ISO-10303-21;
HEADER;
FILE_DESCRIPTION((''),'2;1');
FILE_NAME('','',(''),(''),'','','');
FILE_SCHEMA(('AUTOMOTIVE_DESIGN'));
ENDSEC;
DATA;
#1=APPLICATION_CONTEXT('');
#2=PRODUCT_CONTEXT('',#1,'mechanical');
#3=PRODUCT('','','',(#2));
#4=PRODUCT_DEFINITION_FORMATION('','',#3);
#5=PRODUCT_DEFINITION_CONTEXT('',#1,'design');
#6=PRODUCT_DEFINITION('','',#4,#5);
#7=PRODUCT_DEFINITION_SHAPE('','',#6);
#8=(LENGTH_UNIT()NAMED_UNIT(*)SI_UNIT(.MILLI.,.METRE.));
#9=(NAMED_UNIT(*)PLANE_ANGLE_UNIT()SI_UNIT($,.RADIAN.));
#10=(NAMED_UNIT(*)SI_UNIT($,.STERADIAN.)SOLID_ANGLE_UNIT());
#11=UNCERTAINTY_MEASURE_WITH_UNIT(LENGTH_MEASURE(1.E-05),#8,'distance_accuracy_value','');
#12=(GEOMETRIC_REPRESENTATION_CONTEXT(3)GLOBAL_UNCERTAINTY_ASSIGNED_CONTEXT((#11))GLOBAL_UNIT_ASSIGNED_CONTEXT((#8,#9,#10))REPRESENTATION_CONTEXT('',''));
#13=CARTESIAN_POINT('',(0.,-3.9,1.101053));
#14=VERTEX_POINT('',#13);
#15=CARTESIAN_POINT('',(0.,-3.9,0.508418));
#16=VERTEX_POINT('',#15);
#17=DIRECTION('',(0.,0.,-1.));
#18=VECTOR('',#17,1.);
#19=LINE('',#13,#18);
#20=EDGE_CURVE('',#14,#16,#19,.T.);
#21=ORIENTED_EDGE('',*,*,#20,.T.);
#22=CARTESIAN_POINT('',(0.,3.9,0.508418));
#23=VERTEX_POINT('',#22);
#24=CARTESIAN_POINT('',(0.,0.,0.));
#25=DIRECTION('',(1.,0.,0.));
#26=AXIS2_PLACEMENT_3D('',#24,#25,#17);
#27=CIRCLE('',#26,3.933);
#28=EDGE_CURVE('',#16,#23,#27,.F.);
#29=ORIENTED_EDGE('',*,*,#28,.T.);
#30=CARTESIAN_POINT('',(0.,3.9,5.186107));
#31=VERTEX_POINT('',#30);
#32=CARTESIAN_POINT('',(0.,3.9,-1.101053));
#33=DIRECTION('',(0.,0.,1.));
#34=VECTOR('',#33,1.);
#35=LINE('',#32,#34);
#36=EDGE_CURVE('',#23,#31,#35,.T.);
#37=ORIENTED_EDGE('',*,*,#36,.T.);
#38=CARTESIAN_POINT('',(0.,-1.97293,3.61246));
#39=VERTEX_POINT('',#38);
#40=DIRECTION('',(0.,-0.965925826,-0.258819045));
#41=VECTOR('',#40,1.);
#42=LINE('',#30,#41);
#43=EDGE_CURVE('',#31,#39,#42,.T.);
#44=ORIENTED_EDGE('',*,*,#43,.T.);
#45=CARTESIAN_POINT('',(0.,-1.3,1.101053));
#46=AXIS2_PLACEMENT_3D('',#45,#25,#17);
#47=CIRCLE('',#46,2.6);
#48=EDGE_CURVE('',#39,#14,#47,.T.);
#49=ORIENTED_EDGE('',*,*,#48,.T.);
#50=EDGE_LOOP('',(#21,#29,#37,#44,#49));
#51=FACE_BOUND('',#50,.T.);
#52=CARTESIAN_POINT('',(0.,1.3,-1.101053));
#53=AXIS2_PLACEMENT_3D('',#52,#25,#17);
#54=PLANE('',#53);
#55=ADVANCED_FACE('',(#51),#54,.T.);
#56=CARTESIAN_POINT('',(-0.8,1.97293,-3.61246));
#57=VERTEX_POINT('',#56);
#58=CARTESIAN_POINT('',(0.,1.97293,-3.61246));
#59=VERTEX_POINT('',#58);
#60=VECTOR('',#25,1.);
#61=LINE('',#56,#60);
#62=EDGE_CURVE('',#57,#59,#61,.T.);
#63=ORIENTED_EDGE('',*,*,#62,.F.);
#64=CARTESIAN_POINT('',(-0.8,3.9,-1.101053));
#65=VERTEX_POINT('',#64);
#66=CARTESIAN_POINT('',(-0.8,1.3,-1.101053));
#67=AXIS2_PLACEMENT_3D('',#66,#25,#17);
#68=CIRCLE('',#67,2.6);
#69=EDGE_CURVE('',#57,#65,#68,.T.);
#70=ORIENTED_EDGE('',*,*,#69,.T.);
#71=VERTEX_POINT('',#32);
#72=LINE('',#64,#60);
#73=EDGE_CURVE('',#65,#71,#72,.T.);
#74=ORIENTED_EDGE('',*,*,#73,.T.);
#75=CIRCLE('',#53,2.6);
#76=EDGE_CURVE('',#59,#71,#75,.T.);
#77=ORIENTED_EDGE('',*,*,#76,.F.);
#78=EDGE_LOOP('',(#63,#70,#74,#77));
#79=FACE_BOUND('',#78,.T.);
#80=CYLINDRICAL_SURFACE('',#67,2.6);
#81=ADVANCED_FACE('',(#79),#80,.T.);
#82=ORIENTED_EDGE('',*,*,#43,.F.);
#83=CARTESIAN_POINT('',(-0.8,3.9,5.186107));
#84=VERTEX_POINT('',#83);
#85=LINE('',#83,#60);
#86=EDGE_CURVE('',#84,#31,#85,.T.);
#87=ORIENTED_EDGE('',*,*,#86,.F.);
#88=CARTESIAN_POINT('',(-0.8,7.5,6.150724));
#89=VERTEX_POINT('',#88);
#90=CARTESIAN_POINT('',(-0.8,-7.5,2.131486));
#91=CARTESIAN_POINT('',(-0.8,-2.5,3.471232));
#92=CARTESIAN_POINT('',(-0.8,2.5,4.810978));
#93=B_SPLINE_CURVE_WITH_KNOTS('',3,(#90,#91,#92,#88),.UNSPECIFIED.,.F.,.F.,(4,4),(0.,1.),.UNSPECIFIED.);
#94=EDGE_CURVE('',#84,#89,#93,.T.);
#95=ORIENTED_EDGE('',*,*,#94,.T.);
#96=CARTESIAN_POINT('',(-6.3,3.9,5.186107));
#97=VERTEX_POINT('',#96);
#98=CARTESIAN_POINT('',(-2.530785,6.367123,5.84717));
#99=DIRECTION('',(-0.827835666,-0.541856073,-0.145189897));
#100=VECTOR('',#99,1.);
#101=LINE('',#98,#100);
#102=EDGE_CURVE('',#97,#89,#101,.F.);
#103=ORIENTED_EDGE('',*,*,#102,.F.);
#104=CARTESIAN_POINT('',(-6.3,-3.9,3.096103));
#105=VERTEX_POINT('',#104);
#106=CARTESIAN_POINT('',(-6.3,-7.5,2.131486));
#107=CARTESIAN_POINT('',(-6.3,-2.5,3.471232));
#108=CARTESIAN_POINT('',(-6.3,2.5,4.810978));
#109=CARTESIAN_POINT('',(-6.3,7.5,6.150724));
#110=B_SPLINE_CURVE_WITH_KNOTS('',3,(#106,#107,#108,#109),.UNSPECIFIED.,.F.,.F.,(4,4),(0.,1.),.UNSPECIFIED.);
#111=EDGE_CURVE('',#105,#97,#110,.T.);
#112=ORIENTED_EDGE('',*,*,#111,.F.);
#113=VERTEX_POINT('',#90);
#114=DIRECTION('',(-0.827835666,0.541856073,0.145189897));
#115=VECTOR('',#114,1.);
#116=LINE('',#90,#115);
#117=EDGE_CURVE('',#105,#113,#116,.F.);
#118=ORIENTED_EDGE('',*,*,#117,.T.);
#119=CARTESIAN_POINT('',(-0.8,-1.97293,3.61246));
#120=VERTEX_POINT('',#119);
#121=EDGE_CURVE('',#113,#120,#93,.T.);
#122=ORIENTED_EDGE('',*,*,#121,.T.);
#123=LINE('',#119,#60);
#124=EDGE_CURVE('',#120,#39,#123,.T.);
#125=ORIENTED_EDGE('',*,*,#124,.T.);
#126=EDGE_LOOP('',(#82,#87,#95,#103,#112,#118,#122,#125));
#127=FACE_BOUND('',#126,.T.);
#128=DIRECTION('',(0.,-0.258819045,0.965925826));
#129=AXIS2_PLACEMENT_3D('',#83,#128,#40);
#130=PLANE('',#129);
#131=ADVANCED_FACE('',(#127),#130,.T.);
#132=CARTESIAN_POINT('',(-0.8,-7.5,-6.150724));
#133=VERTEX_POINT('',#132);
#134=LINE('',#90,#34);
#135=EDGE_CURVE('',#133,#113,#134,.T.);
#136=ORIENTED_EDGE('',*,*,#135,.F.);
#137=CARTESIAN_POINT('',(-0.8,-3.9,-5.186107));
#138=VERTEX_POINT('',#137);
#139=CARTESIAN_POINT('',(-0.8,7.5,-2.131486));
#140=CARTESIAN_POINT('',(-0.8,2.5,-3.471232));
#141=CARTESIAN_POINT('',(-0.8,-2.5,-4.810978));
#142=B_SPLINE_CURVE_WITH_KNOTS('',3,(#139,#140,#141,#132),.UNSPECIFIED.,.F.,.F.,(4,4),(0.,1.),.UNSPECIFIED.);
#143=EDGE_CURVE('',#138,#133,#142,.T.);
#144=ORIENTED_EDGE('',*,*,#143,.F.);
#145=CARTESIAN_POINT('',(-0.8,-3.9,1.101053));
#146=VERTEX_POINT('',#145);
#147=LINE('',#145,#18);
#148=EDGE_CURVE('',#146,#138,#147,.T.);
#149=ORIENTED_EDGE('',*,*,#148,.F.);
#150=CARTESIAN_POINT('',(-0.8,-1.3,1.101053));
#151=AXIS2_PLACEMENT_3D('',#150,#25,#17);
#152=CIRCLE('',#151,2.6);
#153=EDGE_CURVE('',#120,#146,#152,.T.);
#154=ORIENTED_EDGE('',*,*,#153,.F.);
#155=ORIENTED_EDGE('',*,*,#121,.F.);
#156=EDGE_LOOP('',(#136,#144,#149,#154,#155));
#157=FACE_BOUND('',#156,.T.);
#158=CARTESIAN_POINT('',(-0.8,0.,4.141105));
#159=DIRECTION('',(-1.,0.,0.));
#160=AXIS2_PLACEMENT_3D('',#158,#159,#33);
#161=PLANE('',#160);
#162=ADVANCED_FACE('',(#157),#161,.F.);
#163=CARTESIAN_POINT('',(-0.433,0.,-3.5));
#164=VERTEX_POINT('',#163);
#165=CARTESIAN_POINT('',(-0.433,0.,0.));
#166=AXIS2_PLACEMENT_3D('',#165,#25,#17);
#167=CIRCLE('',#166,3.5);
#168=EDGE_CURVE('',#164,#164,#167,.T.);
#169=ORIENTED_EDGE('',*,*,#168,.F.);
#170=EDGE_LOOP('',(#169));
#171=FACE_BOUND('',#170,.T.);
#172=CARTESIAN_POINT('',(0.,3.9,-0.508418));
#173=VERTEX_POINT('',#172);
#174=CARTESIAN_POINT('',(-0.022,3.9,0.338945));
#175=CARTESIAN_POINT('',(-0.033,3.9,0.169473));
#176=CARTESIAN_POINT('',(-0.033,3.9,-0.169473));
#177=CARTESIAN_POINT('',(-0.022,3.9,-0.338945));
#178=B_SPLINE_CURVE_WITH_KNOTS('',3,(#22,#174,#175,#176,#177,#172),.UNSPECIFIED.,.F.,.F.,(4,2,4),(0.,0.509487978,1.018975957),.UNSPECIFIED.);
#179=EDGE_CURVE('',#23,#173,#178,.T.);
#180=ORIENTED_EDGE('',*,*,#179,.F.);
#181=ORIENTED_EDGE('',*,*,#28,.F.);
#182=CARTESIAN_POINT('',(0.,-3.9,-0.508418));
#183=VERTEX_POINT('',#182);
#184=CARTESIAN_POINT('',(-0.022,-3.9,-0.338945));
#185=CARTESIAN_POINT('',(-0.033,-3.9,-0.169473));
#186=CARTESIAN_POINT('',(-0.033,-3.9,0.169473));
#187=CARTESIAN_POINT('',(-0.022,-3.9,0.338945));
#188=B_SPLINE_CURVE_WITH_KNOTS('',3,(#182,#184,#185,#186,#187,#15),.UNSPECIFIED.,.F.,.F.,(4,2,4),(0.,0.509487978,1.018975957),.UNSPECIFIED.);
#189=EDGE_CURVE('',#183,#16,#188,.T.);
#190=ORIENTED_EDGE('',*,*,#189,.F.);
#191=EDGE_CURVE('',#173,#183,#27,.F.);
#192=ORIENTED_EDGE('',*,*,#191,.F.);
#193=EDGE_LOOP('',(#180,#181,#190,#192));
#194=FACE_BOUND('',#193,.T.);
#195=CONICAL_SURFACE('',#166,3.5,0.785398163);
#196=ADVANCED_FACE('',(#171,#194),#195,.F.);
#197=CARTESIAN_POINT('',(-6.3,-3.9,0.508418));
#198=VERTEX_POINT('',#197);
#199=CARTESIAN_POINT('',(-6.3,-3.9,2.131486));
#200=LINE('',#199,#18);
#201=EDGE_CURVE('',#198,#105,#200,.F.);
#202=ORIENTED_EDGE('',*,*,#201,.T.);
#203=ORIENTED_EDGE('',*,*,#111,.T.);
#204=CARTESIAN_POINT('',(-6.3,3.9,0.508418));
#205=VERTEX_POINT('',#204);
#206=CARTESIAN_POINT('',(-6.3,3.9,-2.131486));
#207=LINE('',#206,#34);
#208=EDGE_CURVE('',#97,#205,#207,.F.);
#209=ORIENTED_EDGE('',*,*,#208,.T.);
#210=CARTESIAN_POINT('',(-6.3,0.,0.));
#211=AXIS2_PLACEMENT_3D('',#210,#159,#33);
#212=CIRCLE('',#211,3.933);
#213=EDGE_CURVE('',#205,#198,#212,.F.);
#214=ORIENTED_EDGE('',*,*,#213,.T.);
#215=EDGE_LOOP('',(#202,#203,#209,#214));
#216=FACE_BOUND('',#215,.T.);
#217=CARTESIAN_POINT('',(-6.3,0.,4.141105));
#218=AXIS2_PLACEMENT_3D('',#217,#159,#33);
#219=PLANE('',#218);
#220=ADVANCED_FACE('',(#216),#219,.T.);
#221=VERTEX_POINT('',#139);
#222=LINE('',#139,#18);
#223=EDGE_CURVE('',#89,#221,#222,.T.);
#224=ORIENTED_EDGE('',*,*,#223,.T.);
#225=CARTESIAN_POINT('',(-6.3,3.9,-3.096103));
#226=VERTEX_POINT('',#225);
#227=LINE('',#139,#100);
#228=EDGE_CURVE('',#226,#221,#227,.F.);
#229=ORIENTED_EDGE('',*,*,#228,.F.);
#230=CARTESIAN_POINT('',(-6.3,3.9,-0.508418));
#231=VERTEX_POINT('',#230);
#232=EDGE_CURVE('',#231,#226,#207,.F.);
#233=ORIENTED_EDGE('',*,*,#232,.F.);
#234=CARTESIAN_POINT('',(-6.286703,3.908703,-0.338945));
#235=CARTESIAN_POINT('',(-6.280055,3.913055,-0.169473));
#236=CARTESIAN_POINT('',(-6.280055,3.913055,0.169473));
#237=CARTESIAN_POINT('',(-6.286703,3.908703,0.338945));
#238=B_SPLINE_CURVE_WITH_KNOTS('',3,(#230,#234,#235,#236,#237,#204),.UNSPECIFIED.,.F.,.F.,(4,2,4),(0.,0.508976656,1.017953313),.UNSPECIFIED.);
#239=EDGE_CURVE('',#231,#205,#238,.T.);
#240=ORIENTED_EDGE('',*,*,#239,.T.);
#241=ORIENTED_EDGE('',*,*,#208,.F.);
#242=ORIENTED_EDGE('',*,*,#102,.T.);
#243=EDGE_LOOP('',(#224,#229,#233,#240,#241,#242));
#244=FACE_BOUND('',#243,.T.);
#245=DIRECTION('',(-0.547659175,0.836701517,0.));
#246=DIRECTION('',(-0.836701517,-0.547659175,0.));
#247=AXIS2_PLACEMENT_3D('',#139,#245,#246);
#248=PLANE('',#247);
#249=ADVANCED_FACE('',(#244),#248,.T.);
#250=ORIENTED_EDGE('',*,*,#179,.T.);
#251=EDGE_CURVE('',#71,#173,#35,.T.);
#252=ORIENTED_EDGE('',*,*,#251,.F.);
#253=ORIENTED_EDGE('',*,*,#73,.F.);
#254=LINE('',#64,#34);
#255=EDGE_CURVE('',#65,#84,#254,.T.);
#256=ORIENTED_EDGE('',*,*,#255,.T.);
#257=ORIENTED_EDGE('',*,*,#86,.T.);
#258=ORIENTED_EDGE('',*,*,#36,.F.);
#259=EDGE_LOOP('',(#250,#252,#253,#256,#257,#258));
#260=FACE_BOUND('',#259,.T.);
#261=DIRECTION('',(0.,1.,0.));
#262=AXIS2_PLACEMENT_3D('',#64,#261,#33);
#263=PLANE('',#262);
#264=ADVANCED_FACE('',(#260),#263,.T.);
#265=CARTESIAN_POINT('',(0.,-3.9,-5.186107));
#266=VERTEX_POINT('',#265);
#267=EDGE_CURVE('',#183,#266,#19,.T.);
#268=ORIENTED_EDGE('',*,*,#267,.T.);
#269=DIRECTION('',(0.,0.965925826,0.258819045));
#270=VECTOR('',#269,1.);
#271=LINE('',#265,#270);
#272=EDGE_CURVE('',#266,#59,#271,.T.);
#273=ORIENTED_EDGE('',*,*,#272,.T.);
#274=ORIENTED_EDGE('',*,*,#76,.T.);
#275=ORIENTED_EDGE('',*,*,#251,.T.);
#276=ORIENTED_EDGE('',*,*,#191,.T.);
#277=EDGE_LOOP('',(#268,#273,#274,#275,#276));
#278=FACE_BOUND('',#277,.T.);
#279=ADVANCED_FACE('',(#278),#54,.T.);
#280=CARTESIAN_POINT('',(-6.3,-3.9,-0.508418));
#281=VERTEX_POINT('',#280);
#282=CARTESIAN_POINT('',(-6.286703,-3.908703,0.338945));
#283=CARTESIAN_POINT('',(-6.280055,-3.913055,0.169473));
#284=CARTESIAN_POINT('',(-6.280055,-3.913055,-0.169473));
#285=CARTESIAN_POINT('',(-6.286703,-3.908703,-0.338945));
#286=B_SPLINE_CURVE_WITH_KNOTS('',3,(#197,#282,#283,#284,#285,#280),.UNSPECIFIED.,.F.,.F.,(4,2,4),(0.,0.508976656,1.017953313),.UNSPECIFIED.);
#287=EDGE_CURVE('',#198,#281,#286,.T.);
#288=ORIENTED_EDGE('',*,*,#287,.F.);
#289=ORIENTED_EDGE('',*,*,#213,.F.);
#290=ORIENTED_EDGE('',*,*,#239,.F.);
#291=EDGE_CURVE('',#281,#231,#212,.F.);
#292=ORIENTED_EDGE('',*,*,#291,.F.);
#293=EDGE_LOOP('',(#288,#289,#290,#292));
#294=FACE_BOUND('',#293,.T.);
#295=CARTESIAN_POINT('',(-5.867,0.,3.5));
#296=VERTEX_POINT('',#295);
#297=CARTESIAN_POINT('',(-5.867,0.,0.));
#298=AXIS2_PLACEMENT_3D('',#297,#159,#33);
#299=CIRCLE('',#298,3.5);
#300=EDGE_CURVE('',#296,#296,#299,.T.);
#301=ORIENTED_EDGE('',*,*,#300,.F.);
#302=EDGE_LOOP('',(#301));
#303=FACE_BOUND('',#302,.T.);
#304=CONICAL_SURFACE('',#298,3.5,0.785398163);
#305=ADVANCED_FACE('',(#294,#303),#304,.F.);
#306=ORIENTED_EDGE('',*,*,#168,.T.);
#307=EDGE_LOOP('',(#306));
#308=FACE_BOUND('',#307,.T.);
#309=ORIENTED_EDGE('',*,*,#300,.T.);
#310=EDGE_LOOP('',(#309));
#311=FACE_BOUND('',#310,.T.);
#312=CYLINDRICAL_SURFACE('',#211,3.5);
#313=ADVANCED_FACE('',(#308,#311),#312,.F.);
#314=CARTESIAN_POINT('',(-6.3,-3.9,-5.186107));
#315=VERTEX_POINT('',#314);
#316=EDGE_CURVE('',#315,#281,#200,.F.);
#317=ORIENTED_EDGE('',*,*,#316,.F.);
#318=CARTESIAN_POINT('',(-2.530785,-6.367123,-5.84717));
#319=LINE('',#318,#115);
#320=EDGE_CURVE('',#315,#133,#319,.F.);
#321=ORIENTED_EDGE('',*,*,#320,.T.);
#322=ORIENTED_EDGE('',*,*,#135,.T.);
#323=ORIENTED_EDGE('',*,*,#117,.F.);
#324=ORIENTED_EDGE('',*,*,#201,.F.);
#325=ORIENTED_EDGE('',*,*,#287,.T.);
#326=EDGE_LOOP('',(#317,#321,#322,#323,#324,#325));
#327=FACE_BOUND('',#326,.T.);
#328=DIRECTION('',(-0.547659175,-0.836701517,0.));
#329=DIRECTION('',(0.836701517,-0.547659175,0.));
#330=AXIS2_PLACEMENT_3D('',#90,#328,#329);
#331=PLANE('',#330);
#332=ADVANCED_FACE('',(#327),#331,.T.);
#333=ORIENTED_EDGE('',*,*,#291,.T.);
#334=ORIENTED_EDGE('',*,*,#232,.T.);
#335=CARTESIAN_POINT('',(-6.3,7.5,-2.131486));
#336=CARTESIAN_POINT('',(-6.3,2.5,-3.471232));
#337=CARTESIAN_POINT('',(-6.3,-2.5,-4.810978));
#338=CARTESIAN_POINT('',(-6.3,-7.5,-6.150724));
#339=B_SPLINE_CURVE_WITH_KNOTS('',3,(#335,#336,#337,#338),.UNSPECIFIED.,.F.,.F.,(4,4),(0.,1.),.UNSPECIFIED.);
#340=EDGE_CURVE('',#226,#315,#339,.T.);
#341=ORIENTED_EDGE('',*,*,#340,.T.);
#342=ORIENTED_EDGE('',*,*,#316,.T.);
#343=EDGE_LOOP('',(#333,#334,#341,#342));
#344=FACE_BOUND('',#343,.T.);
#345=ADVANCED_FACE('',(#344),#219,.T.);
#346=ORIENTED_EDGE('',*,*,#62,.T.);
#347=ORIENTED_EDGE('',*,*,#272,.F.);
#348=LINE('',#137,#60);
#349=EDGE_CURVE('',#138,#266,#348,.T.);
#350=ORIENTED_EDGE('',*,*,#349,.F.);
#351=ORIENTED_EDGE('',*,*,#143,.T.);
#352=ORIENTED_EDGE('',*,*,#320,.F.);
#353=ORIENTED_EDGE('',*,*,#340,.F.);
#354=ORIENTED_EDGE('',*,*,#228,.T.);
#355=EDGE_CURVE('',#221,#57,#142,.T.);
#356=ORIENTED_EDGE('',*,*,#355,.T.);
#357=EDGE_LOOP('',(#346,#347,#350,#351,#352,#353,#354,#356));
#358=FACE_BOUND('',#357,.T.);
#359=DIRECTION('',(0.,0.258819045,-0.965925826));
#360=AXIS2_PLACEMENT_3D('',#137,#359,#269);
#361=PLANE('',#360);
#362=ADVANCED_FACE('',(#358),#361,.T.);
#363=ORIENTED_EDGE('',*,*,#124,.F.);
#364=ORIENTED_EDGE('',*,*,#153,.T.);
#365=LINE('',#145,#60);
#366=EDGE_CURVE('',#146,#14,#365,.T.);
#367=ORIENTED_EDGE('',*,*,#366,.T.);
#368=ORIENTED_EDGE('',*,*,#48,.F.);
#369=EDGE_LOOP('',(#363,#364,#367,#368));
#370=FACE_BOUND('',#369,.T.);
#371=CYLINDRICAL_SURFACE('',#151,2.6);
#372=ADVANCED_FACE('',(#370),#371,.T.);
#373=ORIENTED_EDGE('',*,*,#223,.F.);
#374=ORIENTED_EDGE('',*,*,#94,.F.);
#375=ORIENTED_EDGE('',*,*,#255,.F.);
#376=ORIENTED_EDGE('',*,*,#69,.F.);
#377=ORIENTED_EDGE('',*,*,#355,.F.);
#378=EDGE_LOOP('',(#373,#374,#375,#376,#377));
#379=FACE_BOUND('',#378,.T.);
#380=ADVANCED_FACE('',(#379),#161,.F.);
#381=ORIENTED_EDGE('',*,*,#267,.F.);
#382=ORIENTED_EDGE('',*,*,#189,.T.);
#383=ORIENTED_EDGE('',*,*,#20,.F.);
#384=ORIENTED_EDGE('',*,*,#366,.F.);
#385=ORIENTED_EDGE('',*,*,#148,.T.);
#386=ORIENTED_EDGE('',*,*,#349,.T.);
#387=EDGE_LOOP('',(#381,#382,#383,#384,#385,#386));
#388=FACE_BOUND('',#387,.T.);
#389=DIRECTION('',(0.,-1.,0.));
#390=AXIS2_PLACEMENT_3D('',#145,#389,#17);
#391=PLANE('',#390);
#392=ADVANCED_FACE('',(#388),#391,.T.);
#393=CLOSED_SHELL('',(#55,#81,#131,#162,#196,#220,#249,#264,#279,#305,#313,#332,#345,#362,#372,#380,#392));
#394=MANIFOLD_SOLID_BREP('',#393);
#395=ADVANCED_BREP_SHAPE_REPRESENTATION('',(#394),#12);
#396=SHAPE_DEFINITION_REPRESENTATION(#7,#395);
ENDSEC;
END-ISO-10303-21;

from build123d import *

# Parameters (mm, degrees)
EXTRUDE1_DEPTH       = 0.8
EXTRUDE2_DEPTH       = 5.5
DRAFT1_ANGLE         = -33.206570315
DRAFT2_ANGLE         = -33.206570315
M6_CLEARANCE_HOLE1_D = 7
CHAMFER1_SIZE        = 0.433


with BuildPart() as part:
    # Sketch1 → Extrude1 (new body)
    with BuildSketch(Plane(origin=(0, 0, 0), x_dir=(0, 0, -1), z_dir=(1, 0, 0))):
        with BuildLine():
            Line((1.101052702, 3.9), (-5.186106572, 3.9))
            Line((-5.186106572, 3.9), (-3.612459851, -1.972929517))
            ThreePointArc((-3.612459851, -1.972929517), (-2.683832418, -3.362718685), (-1.101052702, -3.9))
            Line((-1.101052702, -3.9), (5.186106572, -3.9))
            Line((5.186106572, -3.9), (3.612459851, 1.972929517))
            ThreePointArc((3.612459851, 1.972929517), (2.683832418, 3.362718685), (1.101052702, 3.9))
        make_face()
    extrude(amount=-EXTRUDE1_DEPTH)

    # Sketch2 → Extrude2 (add)
    with BuildSketch(Plane.ZY.offset(0.8)):
        with BuildLine():
            Line((2.131485778, -7.5), (-6.150723665, -7.5))
            add(Edge.make_bspline(
                [(-2.131485778, 7.5), (-3.471231741, 2.5), (-4.810977703, -2.5), (-6.150723665, -7.5)],
                knots=[0, 0, 0, 0, 1, 1, 1, 1], degree=3))
            Line((-2.131485778, 7.5), (6.150723665, 7.5))
            add(Edge.make_bspline(
                [(2.131485778, -7.5), (3.471231741, -2.5), (4.810977703, 2.5), (6.150723665, 7.5)],
                knots=[0, 0, 0, 0, 1, 1, 1, 1], degree=3))
        make_face()
    extrude(amount=EXTRUDE2_DEPTH)

    # Draft1
    draft1_faces = [part.faces().sort_by_distance(p)[0] for p in [
        (-3.55, 7.5, 2.009618943),
    ]]
    draft(draft1_faces, Plane(origin=(-0.8, 0, 4.141104722), x_dir=(0, 0, 1), z_dir=(1, 0, 0)), DRAFT1_ANGLE)

    # Draft2
    draft2_faces = [part.faces().sort_by_distance(p)[0] for p in [
        (-3.55, -7.5, -2.009618943),
    ]]
    draft(draft2_faces, Plane(origin=(-0.8, 0, 4.141104722), x_dir=(0, 0, 1), z_dir=(1, 0, 0)), DRAFT2_ANGLE)

    # M6 Clearance Hole1 (through all)
    with Locations(Plane.ZY.offset(6.3)):
        with Locations((0, 0)):
            Hole(M6_CLEARANCE_HOLE1_D / 2)

    # Chamfer1
    # the kernel refuses this chamfer: 0.433 mm, written as the material it takes off along each edge
    with BuildSketch(Plane(origin=(0, 0, 0), x_dir=(0, 0, -1), z_dir=(0, -1, 0))) as chamfer1_piece_1:
        Polygon((3.5 + CHAMFER1_SIZE, 0), (3.5, -CHAMFER1_SIZE), (3.5, 0), align=None)
    revolve(axis=Axis((0, 0, 0), (1, 0, 0)), mode=Mode.SUBTRACT)
    with BuildSketch(Plane(origin=(-6.3, 0, 0), x_dir=(0, 0, -1), z_dir=(0, -1, 0))) as chamfer1_piece_2:
        Polygon((3.5 + CHAMFER1_SIZE, 0), (3.5, CHAMFER1_SIZE), (3.5, 0), align=None)
    revolve(axis=Axis((-6.3, 0, 0), (1, 0, 0)), mode=Mode.SUBTRACT)


solid = part.part
